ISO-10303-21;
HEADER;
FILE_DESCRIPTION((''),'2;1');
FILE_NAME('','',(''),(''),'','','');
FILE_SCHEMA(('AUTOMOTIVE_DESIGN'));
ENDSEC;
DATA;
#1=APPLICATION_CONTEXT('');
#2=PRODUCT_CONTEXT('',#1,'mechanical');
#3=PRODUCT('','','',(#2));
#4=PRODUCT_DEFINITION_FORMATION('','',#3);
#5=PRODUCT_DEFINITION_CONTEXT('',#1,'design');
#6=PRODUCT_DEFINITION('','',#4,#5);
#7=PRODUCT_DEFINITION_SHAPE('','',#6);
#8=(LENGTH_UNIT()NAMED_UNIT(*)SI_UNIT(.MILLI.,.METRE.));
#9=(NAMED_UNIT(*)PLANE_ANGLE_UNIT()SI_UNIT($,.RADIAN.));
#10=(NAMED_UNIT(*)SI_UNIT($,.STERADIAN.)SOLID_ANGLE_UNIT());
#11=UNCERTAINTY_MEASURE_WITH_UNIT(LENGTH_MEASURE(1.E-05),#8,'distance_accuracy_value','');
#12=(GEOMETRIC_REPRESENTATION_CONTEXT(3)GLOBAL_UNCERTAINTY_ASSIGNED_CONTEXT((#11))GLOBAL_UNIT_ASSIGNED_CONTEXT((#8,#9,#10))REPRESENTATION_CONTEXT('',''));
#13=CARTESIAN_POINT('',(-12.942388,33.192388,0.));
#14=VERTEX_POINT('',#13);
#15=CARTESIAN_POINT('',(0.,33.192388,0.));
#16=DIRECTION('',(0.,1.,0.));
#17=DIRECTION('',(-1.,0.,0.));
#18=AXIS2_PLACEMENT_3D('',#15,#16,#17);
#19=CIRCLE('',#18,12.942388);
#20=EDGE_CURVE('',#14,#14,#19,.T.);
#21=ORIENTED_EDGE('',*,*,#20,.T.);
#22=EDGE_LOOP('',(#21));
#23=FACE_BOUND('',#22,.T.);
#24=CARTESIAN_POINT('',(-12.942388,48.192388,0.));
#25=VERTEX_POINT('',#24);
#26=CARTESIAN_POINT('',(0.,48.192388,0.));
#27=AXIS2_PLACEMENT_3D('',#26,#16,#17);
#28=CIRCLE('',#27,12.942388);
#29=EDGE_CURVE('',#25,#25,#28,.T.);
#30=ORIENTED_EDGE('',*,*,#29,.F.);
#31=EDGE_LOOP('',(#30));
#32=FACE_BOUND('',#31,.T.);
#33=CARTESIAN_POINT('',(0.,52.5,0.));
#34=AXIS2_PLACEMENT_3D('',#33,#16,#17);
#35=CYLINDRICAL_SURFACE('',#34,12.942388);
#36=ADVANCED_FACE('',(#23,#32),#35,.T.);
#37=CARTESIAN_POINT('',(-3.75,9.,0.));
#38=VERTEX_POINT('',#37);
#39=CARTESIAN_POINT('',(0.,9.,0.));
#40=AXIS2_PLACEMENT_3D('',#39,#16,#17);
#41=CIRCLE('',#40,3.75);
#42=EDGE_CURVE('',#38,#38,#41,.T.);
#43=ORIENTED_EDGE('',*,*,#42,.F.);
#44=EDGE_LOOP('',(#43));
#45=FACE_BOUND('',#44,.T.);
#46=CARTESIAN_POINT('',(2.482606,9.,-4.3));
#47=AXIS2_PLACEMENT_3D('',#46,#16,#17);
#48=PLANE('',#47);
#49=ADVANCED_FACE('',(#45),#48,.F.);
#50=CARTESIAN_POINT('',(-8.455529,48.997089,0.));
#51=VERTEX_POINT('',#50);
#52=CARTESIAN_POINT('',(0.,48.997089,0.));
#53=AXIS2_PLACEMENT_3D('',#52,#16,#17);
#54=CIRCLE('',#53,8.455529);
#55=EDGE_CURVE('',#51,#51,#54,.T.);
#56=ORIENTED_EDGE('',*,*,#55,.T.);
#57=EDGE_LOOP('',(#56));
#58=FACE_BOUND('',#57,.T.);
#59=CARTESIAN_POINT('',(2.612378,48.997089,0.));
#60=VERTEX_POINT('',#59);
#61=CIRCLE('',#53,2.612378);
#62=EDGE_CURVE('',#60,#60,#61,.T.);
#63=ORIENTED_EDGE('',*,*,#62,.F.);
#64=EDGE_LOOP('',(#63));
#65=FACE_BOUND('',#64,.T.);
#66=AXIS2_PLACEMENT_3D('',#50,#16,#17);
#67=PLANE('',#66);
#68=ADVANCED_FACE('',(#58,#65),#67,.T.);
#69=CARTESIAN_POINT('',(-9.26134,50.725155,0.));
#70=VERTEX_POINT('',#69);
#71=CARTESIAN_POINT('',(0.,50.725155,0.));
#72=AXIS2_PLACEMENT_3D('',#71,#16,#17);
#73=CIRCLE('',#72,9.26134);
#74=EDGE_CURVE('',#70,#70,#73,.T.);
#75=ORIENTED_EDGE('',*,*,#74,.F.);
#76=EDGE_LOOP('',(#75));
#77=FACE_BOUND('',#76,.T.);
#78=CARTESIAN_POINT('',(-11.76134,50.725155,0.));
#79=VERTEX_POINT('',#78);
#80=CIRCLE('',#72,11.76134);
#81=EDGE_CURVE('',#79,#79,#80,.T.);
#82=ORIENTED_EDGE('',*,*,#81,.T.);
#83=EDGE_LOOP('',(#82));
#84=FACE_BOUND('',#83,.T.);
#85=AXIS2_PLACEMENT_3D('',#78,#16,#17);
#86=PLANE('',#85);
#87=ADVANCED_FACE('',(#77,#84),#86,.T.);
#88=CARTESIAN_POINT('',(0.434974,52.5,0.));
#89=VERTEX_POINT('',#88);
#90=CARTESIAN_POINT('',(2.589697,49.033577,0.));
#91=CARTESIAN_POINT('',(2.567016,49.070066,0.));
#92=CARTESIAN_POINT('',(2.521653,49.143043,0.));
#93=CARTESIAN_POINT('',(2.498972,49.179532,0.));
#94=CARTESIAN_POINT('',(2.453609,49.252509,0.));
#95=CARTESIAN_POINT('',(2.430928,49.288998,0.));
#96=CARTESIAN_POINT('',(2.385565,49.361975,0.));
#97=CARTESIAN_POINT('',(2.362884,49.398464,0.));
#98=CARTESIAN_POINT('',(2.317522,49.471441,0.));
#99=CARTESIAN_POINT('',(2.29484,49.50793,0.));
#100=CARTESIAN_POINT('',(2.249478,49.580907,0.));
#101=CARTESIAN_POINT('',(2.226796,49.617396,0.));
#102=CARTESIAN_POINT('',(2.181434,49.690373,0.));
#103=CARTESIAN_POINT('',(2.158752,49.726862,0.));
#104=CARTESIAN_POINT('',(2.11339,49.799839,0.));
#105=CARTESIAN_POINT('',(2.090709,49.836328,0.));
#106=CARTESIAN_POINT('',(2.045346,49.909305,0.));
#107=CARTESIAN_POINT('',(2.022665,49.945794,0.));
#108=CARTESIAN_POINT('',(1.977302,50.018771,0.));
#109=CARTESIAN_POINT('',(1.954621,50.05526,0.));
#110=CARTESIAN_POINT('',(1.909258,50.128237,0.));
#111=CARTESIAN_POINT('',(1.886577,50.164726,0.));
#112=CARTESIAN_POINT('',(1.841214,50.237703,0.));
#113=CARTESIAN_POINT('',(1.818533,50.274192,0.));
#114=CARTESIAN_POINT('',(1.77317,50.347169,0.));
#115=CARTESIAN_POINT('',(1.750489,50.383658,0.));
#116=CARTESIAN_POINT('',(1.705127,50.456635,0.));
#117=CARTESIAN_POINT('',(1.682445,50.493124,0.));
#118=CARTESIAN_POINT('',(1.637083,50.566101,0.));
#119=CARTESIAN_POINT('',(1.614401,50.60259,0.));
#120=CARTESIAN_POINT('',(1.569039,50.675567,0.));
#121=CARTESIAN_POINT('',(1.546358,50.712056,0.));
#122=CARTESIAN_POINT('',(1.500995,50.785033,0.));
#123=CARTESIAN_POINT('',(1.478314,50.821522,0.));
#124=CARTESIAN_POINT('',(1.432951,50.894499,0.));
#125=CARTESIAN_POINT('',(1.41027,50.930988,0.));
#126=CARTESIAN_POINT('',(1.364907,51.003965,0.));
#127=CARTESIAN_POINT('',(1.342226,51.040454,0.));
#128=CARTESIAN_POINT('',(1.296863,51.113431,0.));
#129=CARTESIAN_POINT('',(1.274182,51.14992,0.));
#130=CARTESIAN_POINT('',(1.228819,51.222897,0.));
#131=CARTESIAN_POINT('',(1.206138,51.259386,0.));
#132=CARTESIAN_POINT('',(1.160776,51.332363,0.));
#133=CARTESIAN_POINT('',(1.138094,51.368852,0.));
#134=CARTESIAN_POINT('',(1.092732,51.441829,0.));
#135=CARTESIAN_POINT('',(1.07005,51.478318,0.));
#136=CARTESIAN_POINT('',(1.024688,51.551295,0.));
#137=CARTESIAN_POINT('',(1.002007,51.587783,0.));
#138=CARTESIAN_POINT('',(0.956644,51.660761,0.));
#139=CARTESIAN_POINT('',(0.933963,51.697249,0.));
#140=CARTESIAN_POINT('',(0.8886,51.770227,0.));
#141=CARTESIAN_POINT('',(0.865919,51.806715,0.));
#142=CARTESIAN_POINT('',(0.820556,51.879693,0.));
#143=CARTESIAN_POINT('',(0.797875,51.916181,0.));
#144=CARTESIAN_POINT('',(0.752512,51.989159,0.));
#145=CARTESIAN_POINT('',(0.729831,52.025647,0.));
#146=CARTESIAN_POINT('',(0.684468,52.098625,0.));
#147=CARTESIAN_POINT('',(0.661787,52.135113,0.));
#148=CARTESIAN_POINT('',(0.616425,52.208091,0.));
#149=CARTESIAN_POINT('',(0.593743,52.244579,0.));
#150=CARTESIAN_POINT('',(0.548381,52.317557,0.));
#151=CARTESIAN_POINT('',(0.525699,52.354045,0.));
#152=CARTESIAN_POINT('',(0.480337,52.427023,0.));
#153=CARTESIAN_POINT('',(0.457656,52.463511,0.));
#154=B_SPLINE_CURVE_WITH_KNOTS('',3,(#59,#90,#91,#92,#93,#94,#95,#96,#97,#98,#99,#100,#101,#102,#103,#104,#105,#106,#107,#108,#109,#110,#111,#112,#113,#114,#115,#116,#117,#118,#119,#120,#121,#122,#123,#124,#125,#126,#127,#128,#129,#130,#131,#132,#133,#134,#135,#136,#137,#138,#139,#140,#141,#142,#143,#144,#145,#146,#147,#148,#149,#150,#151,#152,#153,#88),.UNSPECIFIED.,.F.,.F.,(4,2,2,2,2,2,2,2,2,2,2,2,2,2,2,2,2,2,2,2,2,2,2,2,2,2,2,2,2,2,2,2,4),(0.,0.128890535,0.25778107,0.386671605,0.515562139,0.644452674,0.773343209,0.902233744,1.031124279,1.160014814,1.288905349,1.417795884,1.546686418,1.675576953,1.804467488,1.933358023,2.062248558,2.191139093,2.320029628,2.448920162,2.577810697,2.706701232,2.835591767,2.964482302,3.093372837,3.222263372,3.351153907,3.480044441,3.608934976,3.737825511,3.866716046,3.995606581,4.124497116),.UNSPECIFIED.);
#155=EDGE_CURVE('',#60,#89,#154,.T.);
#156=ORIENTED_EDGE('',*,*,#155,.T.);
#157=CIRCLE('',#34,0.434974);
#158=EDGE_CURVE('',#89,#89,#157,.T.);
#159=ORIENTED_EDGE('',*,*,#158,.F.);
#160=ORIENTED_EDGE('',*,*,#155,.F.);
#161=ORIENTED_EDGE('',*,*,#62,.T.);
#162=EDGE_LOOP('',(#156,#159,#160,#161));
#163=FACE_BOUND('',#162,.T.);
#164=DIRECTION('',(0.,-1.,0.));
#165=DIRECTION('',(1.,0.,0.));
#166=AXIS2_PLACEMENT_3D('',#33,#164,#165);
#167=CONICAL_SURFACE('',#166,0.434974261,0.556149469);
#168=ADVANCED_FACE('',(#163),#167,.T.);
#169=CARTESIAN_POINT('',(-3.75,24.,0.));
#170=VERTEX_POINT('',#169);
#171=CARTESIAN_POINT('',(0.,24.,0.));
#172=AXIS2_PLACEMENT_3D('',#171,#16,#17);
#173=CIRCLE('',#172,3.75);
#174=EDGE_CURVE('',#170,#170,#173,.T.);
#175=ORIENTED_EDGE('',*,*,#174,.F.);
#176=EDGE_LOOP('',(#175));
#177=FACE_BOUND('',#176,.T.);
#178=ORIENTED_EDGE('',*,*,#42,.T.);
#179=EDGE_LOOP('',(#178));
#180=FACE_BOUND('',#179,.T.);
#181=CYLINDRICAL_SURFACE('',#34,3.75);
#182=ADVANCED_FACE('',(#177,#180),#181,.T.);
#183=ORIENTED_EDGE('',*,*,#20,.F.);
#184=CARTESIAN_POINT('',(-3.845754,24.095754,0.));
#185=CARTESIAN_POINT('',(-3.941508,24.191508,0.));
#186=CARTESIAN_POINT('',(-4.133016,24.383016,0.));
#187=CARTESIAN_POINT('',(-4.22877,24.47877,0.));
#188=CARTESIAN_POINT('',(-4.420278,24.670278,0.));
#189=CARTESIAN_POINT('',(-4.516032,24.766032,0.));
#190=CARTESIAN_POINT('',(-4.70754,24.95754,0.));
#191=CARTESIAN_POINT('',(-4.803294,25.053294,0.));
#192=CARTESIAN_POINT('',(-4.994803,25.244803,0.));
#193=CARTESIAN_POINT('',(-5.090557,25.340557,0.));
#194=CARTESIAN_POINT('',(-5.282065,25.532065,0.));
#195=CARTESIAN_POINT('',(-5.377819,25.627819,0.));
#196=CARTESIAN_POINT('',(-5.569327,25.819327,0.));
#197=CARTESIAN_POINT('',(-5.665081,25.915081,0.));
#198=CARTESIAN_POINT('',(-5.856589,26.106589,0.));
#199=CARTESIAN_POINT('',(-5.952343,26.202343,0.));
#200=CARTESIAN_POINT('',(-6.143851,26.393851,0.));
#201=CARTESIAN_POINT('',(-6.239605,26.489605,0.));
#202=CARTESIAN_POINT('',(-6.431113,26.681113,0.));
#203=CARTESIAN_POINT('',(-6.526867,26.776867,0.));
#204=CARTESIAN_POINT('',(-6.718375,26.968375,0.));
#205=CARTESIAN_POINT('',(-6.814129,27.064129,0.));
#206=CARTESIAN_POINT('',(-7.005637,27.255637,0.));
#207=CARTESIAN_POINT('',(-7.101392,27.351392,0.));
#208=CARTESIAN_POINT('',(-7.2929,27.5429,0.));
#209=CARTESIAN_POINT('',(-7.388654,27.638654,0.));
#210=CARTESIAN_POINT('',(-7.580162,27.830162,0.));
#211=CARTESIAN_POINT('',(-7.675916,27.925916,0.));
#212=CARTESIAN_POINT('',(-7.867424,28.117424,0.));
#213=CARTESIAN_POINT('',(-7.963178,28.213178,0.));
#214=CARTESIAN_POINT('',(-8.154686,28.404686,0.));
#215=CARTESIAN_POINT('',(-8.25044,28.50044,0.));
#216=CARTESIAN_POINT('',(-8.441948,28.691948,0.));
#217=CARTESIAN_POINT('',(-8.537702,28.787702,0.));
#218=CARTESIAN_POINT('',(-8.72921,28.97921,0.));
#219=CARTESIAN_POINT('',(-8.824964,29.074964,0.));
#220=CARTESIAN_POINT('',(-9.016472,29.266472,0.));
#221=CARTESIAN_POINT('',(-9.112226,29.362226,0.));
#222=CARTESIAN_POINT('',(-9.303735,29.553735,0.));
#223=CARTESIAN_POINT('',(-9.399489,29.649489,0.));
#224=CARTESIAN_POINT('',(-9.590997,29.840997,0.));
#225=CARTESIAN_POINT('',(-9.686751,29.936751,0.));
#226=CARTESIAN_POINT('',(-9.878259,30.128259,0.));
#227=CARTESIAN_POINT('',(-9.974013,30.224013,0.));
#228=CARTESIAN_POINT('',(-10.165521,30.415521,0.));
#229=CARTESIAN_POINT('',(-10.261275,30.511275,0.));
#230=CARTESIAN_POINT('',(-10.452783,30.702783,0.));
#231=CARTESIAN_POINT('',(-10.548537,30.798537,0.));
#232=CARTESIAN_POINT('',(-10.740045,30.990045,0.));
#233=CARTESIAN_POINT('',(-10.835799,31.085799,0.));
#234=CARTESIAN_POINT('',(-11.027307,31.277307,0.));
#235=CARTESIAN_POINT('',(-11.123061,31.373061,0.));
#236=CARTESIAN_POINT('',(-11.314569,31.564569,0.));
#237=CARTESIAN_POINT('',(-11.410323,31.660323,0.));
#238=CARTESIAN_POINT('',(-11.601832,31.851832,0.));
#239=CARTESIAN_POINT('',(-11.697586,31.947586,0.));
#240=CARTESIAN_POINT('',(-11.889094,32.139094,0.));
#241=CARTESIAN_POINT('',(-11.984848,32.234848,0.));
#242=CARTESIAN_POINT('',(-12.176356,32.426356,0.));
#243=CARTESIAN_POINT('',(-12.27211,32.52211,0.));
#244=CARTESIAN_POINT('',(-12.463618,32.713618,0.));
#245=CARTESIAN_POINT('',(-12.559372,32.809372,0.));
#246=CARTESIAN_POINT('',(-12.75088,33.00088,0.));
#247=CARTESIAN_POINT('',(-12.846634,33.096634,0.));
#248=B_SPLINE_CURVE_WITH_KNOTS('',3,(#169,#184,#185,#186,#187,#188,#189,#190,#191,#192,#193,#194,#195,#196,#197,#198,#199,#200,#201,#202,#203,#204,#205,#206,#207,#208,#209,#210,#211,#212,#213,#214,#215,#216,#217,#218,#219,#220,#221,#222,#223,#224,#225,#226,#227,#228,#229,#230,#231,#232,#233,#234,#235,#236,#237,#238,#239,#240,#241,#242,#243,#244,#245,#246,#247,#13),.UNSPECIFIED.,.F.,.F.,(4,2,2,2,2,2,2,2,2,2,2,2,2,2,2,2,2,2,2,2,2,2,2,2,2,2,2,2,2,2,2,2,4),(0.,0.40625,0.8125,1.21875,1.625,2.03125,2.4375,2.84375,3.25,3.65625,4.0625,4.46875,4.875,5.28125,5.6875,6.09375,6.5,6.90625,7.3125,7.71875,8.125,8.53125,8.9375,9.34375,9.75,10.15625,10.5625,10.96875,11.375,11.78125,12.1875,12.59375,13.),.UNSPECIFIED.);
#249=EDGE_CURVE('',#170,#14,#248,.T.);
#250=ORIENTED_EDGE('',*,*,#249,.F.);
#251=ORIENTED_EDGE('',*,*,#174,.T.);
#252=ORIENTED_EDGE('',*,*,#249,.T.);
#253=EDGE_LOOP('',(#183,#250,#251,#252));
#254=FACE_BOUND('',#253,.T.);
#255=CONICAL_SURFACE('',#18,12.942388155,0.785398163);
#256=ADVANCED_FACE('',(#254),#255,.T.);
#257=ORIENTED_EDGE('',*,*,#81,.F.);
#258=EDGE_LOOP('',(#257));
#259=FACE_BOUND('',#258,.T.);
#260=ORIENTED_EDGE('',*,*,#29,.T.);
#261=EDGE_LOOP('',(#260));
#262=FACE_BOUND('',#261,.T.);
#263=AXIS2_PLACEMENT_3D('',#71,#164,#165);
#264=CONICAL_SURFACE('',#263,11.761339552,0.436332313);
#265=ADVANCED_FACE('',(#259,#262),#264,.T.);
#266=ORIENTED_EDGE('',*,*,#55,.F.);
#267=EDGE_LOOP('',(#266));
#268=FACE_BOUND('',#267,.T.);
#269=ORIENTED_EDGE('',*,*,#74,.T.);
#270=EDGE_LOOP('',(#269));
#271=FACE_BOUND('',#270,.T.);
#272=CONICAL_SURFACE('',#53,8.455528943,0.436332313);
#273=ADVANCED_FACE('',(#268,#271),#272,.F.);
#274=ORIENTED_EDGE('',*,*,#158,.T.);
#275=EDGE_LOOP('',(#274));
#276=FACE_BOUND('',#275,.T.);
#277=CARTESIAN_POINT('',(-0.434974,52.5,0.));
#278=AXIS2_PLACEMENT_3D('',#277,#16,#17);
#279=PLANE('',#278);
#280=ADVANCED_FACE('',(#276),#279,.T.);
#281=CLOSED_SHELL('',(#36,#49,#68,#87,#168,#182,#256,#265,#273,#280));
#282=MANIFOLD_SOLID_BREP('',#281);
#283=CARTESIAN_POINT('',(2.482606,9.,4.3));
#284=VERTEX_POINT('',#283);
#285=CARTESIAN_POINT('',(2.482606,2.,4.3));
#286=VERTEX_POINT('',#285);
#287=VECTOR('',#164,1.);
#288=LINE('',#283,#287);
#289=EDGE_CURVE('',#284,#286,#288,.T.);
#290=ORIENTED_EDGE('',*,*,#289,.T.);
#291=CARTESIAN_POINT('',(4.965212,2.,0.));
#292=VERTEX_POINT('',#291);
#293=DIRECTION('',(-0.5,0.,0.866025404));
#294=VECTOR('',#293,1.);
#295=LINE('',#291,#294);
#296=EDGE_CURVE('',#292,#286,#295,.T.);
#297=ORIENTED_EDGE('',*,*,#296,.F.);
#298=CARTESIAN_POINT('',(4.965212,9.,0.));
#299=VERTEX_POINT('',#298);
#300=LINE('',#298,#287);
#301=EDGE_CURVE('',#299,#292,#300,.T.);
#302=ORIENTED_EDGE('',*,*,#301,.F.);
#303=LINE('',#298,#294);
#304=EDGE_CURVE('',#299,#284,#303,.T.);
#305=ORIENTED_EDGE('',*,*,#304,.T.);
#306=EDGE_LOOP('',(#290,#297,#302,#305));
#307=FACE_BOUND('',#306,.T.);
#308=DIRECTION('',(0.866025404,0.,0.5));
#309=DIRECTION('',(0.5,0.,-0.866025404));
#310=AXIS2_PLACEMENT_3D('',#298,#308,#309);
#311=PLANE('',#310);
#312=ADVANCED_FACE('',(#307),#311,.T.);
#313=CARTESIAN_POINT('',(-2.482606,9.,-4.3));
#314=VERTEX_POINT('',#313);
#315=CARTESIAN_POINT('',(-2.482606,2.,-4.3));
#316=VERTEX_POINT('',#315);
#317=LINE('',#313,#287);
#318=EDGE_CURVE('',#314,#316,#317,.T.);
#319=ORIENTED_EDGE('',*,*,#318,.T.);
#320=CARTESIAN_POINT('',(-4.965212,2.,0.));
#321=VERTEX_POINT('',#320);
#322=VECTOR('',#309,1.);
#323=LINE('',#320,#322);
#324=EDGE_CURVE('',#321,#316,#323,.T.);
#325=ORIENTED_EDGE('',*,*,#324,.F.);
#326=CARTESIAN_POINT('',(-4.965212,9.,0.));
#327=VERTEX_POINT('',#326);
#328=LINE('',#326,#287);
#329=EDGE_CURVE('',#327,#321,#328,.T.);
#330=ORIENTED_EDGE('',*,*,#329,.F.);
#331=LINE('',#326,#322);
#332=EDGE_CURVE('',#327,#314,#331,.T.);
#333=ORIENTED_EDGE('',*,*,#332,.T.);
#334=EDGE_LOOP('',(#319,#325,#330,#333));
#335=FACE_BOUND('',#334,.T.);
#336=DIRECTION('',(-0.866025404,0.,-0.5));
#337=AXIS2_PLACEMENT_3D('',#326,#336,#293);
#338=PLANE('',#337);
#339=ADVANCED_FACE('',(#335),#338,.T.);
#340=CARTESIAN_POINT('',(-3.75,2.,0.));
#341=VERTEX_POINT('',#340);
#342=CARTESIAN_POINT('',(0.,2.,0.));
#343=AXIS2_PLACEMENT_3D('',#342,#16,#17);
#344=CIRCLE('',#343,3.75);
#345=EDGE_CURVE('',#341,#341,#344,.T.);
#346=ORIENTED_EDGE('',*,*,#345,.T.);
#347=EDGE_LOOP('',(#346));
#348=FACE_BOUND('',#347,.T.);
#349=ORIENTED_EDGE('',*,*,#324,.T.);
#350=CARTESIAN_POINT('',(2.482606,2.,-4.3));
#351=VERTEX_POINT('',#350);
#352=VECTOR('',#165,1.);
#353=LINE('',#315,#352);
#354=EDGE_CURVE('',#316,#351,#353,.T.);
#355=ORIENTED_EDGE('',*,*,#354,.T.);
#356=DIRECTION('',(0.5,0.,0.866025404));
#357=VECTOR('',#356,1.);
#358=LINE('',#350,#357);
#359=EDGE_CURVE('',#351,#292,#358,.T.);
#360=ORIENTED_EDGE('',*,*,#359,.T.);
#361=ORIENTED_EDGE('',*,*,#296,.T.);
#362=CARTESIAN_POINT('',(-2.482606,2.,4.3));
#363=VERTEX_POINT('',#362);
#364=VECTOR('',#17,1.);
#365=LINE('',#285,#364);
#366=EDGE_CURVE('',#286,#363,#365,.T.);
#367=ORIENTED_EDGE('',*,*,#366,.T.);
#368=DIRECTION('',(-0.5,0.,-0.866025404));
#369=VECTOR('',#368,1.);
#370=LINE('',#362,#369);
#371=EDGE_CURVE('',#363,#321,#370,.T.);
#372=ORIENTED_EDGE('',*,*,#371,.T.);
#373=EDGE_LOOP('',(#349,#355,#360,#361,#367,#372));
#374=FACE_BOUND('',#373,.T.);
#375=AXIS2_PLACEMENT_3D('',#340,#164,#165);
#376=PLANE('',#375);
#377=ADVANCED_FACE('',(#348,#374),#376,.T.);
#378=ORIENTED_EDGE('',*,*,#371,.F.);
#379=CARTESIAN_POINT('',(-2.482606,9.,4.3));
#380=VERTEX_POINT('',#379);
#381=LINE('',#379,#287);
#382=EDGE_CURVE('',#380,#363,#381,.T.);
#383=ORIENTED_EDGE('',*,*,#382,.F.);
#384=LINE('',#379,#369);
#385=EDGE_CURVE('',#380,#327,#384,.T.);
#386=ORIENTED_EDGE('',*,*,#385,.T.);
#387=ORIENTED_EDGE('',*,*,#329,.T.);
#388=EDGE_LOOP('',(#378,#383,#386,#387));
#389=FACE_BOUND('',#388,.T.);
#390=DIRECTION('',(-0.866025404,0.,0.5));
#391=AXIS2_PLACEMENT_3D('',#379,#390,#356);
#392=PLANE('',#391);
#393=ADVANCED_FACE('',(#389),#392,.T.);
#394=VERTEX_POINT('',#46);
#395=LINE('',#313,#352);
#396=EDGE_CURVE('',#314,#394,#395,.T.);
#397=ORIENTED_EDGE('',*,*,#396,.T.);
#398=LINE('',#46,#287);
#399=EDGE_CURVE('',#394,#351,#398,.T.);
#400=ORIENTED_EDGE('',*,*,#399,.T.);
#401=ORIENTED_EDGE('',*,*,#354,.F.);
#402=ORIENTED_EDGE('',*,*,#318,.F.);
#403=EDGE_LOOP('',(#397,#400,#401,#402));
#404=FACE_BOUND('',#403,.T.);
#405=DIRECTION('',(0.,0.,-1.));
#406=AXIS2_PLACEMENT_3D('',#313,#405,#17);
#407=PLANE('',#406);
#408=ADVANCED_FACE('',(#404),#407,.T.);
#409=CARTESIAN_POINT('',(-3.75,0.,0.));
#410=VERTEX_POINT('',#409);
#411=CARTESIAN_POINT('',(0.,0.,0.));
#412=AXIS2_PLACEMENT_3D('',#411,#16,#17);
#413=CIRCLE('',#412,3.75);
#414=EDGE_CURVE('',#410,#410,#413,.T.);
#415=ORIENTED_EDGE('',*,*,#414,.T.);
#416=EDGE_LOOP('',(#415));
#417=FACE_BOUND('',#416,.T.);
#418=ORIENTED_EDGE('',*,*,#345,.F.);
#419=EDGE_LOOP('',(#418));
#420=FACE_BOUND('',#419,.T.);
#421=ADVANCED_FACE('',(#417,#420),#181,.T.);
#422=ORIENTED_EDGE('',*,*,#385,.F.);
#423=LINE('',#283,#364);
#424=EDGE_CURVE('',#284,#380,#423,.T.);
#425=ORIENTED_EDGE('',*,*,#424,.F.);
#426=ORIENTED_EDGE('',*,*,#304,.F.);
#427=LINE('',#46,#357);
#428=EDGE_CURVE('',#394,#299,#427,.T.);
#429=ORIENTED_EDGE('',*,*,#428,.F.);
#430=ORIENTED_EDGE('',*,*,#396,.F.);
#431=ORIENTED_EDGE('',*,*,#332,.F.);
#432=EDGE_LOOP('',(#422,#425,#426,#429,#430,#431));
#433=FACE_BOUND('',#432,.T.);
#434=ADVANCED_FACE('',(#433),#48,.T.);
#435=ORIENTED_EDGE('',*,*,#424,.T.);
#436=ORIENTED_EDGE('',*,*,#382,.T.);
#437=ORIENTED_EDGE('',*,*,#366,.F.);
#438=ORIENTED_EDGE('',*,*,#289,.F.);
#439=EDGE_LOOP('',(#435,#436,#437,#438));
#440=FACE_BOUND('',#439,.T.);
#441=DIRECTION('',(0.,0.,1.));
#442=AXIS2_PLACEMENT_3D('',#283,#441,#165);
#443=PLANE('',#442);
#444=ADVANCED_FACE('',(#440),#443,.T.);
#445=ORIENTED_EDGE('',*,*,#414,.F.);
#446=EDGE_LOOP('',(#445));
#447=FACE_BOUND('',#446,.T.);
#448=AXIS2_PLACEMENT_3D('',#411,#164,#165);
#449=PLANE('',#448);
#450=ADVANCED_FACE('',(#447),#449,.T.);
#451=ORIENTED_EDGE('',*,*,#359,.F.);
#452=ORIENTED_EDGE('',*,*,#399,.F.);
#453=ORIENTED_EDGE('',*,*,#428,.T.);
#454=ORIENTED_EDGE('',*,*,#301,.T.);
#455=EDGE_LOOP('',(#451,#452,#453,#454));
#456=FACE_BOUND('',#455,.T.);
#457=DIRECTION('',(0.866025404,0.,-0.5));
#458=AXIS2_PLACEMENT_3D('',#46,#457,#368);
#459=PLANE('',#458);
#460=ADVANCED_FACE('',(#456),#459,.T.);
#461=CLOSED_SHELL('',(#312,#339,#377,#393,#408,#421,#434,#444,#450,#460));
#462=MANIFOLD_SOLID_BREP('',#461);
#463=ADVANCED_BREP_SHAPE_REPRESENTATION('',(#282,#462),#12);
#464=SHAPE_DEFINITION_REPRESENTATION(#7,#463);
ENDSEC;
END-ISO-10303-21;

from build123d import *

# Parameters (mm, degrees)
SALIENTE_EXTRUIR1_START = -7
CROQUIS2_R              = 4.25
SALIENTE_EXTRUIR1_DEPTH = 7


# Read off the part's stored shape, not the designer's step: Partir1
with BuildPart() as part:
    # Croquis1 → Revolución1 (revolve)
    with BuildSketch(Plane.XY):
        Polygon((0, 0), (-3.75, 0), (-3.75, 2), (-4.25, 2), (-4.25, 9), (-3.75, 9), (-3.75, 24), (-12.942388155, 33.192388155), (-12.942388155, 48.192388155), (-11.761339552, 50.725155058), (-9.261339552, 50.725155058), (-8.455528943, 48.997088628), (-2.612378307, 48.997088628), (-0.434974261, 52.5), (0, 52.5), align=None)
    revolve(axis=Axis((0, 52.5, 0), (0, -1, 0)))

    # Croquis2 → Saliente-Extruir1 (add)
    with BuildSketch(Plane.XZ.offset(-2).offset(SALIENTE_EXTRUIR1_START)):
        Polygon((4.965212315, 0), (2.482606158, 4.3), (-2.482606158, 4.3), (-4.965212315, 0), (-2.482606158, -4.3), (2.482606158, -4.3), align=None)
        Circle(CROQUIS2_R, mode=Mode.SUBTRACT)
    extrude(amount=SALIENTE_EXTRUIR1_DEPTH)


with BuildPart() as body_2:
    # Partir1: the piece on the far side of the plane
    add(part.part)
    split(bisect_by=Plane(origin=(0, 9, 0), x_dir=(1, 0, 0), z_dir=(0, 1, 0)), keep=Keep.BOTTOM)


with BuildPart() as part_1:
    add(part.part)

    # Partir1
    split(bisect_by=Plane(origin=(0, 9, 0), x_dir=(1, 0, 0), z_dir=(0, 1, 0)), keep=Keep.TOP)


solid = Compound([body_2.part, part_1.part])
